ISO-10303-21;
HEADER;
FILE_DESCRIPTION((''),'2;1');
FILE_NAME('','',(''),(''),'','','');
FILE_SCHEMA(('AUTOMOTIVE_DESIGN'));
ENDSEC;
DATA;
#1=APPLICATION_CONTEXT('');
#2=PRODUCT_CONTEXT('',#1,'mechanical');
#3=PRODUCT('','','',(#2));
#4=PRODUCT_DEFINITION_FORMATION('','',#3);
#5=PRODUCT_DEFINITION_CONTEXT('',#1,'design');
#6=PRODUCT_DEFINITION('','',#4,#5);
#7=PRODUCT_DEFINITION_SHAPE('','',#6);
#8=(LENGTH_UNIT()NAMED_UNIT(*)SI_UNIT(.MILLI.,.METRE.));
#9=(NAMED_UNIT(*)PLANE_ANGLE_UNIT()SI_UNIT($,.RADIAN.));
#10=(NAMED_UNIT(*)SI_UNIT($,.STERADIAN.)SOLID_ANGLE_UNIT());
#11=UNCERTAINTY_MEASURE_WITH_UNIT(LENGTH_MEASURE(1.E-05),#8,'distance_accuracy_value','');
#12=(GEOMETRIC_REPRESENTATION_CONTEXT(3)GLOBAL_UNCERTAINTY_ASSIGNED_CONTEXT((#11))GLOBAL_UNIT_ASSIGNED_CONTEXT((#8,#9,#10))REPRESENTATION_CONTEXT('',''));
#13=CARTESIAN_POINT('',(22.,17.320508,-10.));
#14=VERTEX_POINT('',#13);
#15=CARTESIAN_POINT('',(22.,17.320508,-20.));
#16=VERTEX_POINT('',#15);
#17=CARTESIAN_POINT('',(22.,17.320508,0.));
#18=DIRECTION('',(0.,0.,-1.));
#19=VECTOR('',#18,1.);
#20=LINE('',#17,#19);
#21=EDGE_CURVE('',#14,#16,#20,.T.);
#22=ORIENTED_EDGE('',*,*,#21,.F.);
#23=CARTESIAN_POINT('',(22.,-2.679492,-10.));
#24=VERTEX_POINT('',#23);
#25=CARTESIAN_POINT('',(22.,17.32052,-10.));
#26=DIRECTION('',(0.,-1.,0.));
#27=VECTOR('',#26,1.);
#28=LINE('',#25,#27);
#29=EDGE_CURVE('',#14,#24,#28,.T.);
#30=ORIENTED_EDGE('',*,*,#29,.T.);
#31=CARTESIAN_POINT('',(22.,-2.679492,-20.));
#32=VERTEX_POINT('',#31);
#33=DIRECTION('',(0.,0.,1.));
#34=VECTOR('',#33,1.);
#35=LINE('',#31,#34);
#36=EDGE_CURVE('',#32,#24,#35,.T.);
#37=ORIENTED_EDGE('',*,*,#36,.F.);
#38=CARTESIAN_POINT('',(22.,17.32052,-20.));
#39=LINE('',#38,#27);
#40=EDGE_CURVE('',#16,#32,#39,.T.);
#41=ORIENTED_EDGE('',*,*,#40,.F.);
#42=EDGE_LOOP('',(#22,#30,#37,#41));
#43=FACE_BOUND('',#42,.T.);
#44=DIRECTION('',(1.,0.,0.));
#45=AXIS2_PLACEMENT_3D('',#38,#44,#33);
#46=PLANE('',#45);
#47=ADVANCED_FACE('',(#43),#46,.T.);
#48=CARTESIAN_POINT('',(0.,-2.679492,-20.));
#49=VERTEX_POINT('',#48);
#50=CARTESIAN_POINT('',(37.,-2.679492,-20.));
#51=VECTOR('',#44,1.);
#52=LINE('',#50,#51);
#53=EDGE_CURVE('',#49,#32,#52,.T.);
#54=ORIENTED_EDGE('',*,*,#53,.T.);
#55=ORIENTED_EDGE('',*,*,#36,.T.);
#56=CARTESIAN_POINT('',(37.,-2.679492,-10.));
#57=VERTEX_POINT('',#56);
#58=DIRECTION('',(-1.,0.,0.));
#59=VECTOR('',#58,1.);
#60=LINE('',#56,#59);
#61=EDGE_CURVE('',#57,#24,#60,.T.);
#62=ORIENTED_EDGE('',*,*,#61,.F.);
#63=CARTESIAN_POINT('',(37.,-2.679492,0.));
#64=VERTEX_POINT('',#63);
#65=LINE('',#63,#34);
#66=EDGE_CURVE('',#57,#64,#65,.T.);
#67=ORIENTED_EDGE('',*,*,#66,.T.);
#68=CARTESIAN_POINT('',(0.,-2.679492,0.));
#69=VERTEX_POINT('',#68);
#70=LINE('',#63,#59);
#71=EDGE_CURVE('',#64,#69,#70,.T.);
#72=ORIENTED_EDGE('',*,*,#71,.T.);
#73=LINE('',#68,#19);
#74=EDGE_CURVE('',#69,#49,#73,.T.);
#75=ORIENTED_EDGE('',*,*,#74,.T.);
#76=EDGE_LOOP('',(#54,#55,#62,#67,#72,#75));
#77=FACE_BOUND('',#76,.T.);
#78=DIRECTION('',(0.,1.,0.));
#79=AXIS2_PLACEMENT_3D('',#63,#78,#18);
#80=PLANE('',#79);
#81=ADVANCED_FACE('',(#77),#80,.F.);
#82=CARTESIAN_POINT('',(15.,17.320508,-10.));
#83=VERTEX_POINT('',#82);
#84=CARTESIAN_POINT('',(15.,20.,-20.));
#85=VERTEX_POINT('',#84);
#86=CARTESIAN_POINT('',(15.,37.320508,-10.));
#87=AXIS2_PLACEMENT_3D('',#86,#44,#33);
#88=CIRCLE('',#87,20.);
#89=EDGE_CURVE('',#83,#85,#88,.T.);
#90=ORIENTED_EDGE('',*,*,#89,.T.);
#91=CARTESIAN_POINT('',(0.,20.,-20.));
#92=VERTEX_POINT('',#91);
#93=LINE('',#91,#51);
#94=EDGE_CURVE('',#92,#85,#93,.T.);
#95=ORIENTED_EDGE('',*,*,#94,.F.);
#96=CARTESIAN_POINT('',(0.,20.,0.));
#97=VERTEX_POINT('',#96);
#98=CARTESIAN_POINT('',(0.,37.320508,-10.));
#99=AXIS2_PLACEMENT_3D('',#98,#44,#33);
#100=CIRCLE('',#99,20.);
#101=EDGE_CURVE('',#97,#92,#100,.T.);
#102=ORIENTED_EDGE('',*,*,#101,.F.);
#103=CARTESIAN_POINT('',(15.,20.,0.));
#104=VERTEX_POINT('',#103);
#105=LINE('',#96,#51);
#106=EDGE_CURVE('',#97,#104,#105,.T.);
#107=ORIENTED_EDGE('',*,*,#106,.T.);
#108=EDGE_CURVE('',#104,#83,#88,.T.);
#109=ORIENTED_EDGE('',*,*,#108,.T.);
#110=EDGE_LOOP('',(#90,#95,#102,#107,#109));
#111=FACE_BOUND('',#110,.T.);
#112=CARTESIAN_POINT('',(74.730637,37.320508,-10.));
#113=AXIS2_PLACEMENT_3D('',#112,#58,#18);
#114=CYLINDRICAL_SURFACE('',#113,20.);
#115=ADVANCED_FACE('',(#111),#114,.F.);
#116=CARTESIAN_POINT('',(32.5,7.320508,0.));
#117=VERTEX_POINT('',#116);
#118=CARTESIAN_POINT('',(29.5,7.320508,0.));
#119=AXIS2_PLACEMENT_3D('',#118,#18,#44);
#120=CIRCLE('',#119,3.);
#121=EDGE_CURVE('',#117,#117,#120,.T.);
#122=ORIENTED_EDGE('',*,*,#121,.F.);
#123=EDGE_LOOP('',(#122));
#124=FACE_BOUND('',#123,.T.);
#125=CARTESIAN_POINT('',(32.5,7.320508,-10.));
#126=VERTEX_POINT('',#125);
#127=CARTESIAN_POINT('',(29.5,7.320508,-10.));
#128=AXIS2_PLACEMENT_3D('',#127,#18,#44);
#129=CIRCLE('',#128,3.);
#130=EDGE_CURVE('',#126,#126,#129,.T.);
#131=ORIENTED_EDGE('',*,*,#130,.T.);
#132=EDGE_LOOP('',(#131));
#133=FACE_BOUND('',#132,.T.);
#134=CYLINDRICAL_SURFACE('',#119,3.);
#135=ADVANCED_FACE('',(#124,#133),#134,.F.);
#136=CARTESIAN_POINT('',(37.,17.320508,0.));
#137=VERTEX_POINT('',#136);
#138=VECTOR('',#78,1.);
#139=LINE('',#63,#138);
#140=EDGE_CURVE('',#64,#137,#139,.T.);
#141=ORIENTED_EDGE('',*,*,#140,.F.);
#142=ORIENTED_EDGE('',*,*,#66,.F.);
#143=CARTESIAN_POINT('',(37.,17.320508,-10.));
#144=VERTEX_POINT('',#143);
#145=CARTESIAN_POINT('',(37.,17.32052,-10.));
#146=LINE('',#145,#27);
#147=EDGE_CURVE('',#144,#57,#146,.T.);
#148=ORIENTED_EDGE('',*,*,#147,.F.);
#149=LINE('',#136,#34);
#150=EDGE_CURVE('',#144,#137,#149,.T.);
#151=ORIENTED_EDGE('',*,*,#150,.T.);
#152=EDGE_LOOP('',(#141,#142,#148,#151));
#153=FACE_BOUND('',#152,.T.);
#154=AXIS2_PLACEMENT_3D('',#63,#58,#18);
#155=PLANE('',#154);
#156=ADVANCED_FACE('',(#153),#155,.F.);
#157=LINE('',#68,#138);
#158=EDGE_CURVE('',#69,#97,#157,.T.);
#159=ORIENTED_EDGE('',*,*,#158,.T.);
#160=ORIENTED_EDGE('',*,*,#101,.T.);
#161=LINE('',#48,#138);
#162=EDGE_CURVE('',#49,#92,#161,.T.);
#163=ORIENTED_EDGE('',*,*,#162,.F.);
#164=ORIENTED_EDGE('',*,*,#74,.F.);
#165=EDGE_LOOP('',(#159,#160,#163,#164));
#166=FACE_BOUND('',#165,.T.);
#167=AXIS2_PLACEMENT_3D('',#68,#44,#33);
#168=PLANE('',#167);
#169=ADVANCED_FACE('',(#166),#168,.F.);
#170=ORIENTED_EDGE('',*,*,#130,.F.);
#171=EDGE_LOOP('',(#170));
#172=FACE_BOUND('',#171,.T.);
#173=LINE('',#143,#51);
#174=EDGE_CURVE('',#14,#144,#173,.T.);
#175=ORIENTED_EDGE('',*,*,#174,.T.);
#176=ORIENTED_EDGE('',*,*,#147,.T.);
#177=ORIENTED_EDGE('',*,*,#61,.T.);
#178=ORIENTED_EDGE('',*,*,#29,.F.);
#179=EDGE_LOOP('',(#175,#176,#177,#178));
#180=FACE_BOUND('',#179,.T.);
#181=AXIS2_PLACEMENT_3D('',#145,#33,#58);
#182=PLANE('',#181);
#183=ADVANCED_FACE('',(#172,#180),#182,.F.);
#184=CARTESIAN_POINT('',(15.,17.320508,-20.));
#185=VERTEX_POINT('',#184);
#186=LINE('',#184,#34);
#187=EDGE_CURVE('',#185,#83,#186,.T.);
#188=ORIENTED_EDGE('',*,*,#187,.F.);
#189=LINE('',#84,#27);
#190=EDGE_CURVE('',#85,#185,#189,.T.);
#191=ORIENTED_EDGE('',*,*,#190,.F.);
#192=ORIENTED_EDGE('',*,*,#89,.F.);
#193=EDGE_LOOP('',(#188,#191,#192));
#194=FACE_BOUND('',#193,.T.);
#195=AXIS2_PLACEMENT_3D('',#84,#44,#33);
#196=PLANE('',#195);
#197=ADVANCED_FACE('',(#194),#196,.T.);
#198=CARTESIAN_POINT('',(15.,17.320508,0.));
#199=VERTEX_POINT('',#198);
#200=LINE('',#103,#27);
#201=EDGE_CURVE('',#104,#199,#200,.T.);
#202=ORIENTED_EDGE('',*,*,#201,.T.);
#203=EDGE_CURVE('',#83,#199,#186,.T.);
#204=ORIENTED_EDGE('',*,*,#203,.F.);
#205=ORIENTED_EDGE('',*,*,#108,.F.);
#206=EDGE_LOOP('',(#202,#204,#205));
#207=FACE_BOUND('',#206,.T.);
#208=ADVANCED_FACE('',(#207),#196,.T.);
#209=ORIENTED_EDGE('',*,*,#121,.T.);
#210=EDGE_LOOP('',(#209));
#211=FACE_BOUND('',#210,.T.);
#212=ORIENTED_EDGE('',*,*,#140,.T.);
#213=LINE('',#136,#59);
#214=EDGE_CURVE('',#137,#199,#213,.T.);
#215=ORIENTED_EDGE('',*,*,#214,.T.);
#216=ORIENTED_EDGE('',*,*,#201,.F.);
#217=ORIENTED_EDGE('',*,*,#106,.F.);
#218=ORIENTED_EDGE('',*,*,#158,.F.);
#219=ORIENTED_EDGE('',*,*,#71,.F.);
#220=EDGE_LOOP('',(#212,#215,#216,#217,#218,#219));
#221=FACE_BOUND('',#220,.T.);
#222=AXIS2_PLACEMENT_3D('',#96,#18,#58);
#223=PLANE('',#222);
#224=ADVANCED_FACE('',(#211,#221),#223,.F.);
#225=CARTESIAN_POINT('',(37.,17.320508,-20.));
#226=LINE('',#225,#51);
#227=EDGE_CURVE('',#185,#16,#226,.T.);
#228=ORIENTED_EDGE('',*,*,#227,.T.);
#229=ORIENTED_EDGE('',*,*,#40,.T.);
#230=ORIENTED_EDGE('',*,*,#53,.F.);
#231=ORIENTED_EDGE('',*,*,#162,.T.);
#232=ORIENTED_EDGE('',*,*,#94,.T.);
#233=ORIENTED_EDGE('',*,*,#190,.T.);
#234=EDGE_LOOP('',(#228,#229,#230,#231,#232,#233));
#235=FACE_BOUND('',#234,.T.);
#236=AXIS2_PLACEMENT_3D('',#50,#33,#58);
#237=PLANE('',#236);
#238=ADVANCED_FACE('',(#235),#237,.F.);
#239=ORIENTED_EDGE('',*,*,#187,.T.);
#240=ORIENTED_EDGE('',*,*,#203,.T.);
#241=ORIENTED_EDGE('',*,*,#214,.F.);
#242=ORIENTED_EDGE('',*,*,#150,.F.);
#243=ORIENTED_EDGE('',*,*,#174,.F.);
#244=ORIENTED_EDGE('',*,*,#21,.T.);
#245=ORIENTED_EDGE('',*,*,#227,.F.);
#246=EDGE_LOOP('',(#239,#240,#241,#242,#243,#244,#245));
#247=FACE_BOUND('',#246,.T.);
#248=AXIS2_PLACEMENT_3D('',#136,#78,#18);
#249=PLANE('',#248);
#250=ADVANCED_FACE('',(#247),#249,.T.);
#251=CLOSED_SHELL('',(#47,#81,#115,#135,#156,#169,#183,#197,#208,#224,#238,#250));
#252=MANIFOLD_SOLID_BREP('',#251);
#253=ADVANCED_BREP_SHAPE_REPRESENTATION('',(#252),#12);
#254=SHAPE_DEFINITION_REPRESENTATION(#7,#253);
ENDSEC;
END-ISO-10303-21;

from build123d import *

# Parameters (mm, degrees)
CROQUIS2_W                  = 37
CROQUIS2_H                  = 20
SALIENTE_EXTRUIR2_DEPTH     = 20
CORTAR_EXTRUIR2_DEPTH       = 47.572524089
CORTAR_EXTRUIR2_DEPTH_BACK  = 47.572524089
CROQUIS3_W                  = 15
CROQUIS3_H                  = 10
CROQUIS4_R                  = 3
CORTAR_EXTRUIR3_DEPTH       = 44.231932642
CROQUIS8_W                  = 15
CROQUIS8_H                  = 20
SALIENTE_EXTRUIR4_DEPTH     = 2.679491924
CORTAR_EXTRUIR10_DEPTH      = 36.832945734
CORTAR_EXTRUIR10_DEPTH_BACK = 36.832945734
MOVER_START                 = -20
MOVER_CARA2_DEPTH           = 10
MOVER_START_2               = -10
MOVER_CARA2_2_OUTLINE_W     = 22
MOVER_CARA2_2_OUTLINE_H     = 2.679491924
MOVER_CARA2_2_OUTLINE_R     = 3
MOVER_CARA2_2_DEPTH         = 10
MOVER_CARA2_3_OUTLINE_R     = 3
MOVER_CARA2_3_DEPTH         = 10
MOVER_CARA2_4_OUTLINE_W     = 22
MOVER_CARA2_4_OUTLINE_H     = 2.679491924
MOVER_CARA2_4_OUTLINE_R     = 3
MOVER_CARA2_4_DEPTH         = 10
MOVER_CARA2_5_DEPTH         = 15
MOVER_CARA2_6_DEPTH         = 15


with BuildPart() as part:
    # Croquis2 → Saliente-Extruir2 (new body)
    with BuildSketch(Plane(origin=(0, 0, 0), x_dir=(1, 0, 0), z_dir=(0, 1, 0))):
        with Locations((18.5, 10)):
            Rectangle(CROQUIS2_W, CROQUIS2_H)
    extrude(amount=SALIENTE_EXTRUIR2_DEPTH)

    # Croquis3 → Cortar-Extruir2 (cut, two sides: drawn at the far end of the back side and taken through both)
    with BuildSketch(Plane(origin=(0, 0, 0), x_dir=(1, 0, 0), z_dir=(0, 1, 0)).offset(-CORTAR_EXTRUIR2_DEPTH_BACK)):
        with Locations((7.5, 15)):
            Rectangle(CROQUIS3_W, CROQUIS3_H)
    extrude(amount=CORTAR_EXTRUIR2_DEPTH + CORTAR_EXTRUIR2_DEPTH_BACK, mode=Mode.SUBTRACT)

    # Croquis4 → Cortar-Extruir3 (cut, through all)
    with BuildSketch(Plane(origin=(0, 0, -10), x_dir=(-1, 0, 0), z_dir=(0, 0, -1))):
        with Locations((-7.5, 10)):
            Circle(CROQUIS4_R)
    extrude(amount=-CORTAR_EXTRUIR3_DEPTH, mode=Mode.SUBTRACT)

    # Croquis8 → Saliente-Extruir4 (add)
    with BuildSketch(Plane.XZ):
        with Locations((29.5, -10)):
            Rectangle(CROQUIS8_W, CROQUIS8_H)
    extrude(amount=SALIENTE_EXTRUIR4_DEPTH)

    # Croquis9 → Cortar-Extruir10 (cut, two sides: drawn at the far end of the back side and taken through both)
    with BuildSketch(Plane.ZY.offset(-22).offset(-CORTAR_EXTRUIR10_DEPTH_BACK)):
        with BuildLine():
            Line((-81.034656774, -37.917867438), (-20, -2.679491924))
            ThreePointArc((-20, -2.679491924), (-10, 0), (0, -2.679491924))
            Line((0, -2.679491924), (61.034656774, -37.917867438))
            Line((61.034656774, -37.917867438), (61.034656774, -178.871369507))
            Line((61.034656774, -178.871369507), (-81.034656774, -178.871369507))
            Line((-81.034656774, -178.871369507), (-81.034656774, -37.917867438))
        make_face()
    extrude(amount=CORTAR_EXTRUIR10_DEPTH + CORTAR_EXTRUIR10_DEPTH_BACK, mode=Mode.SUBTRACT)

    # Mover cara2: read off the stored shape, not the designer's step
    # Mover cara2 outline → Mover cara2 (cut)
    with BuildSketch(Plane.XY.offset(MOVER_START)):
        Polygon((15, 20), (15, 17.320508076), (22, 17.320508076), (22, -2.679491924), (37, -2.679491924), (37, 20), align=None)
    extrude(amount=MOVER_CARA2_DEPTH, mode=Mode.SUBTRACT)

    # Mover cara2 2 outline → Mover cara2 2 (cut)
    with BuildSketch(Plane.XY.offset(MOVER_START_2)):
        with Locations((26, 18.660254038)):
            Rectangle(MOVER_CARA2_2_OUTLINE_W, MOVER_CARA2_2_OUTLINE_H)
        with Locations((29.5, 7.320508076)):
            Circle(MOVER_CARA2_2_OUTLINE_R)
    extrude(amount=MOVER_CARA2_2_DEPTH, mode=Mode.SUBTRACT)

    # Mover cara2 3 outline → Mover cara2 3 (add)
    # profile 1 of 2: a face of its own
    with BuildSketch(Plane.XY.offset(MOVER_START_2)):
        Polygon((37, 17.320508076), (22, 17.320508076), (22, 0), (0, 0), (0, -2.679491924), (37, -2.679491924), align=None)
        with Locations((29.5, 7.320508076)):
            Circle(MOVER_CARA2_3_OUTLINE_R, mode=Mode.SUBTRACT)
    # profile 2 of 2: a face of its own
    with BuildSketch(Plane.XY.offset(MOVER_START_2)):
        with Locations((7.5, 10)):
            Circle(MOVER_CARA2_3_OUTLINE_R)
    extrude(amount=MOVER_CARA2_3_DEPTH)

    # Mover cara2 4 outline → Mover cara2 4 (add)
    with BuildSketch(Plane.XY.offset(MOVER_START)):
        with Locations((11, -1.339745962)):
            Rectangle(MOVER_CARA2_4_OUTLINE_W, MOVER_CARA2_4_OUTLINE_H)
        with Locations((7.5, 10)):
            Circle(MOVER_CARA2_4_OUTLINE_R)
    extrude(amount=MOVER_CARA2_4_DEPTH)

    # Mover cara2 5 outline → Mover cara2 5 (cut)
    with BuildSketch(Plane.YZ):
        with BuildLine():
            ThreePointArc((20, 0), (18.00199155, -4.823619098), (17.320508076, -10))
            Line((17.320508076, -10), (20, -10))
            Line((20, -10), (20, 0))
        make_face()
    extrude(amount=MOVER_CARA2_5_DEPTH, mode=Mode.SUBTRACT)

    # Mover cara2 6 outline → Mover cara2 6 (add)
    with BuildSketch(Plane.YZ):
        with BuildLine():
            Line((0, -20), (20, -20))
            ThreePointArc((20, -20), (18.00199155, -15.176380902), (17.320508076, -10))
            Line((17.320508076, -10), (0, -10))
            Line((0, -10), (0, -20))
        make_face()
    extrude(amount=MOVER_CARA2_6_DEPTH)


solid = part.part
